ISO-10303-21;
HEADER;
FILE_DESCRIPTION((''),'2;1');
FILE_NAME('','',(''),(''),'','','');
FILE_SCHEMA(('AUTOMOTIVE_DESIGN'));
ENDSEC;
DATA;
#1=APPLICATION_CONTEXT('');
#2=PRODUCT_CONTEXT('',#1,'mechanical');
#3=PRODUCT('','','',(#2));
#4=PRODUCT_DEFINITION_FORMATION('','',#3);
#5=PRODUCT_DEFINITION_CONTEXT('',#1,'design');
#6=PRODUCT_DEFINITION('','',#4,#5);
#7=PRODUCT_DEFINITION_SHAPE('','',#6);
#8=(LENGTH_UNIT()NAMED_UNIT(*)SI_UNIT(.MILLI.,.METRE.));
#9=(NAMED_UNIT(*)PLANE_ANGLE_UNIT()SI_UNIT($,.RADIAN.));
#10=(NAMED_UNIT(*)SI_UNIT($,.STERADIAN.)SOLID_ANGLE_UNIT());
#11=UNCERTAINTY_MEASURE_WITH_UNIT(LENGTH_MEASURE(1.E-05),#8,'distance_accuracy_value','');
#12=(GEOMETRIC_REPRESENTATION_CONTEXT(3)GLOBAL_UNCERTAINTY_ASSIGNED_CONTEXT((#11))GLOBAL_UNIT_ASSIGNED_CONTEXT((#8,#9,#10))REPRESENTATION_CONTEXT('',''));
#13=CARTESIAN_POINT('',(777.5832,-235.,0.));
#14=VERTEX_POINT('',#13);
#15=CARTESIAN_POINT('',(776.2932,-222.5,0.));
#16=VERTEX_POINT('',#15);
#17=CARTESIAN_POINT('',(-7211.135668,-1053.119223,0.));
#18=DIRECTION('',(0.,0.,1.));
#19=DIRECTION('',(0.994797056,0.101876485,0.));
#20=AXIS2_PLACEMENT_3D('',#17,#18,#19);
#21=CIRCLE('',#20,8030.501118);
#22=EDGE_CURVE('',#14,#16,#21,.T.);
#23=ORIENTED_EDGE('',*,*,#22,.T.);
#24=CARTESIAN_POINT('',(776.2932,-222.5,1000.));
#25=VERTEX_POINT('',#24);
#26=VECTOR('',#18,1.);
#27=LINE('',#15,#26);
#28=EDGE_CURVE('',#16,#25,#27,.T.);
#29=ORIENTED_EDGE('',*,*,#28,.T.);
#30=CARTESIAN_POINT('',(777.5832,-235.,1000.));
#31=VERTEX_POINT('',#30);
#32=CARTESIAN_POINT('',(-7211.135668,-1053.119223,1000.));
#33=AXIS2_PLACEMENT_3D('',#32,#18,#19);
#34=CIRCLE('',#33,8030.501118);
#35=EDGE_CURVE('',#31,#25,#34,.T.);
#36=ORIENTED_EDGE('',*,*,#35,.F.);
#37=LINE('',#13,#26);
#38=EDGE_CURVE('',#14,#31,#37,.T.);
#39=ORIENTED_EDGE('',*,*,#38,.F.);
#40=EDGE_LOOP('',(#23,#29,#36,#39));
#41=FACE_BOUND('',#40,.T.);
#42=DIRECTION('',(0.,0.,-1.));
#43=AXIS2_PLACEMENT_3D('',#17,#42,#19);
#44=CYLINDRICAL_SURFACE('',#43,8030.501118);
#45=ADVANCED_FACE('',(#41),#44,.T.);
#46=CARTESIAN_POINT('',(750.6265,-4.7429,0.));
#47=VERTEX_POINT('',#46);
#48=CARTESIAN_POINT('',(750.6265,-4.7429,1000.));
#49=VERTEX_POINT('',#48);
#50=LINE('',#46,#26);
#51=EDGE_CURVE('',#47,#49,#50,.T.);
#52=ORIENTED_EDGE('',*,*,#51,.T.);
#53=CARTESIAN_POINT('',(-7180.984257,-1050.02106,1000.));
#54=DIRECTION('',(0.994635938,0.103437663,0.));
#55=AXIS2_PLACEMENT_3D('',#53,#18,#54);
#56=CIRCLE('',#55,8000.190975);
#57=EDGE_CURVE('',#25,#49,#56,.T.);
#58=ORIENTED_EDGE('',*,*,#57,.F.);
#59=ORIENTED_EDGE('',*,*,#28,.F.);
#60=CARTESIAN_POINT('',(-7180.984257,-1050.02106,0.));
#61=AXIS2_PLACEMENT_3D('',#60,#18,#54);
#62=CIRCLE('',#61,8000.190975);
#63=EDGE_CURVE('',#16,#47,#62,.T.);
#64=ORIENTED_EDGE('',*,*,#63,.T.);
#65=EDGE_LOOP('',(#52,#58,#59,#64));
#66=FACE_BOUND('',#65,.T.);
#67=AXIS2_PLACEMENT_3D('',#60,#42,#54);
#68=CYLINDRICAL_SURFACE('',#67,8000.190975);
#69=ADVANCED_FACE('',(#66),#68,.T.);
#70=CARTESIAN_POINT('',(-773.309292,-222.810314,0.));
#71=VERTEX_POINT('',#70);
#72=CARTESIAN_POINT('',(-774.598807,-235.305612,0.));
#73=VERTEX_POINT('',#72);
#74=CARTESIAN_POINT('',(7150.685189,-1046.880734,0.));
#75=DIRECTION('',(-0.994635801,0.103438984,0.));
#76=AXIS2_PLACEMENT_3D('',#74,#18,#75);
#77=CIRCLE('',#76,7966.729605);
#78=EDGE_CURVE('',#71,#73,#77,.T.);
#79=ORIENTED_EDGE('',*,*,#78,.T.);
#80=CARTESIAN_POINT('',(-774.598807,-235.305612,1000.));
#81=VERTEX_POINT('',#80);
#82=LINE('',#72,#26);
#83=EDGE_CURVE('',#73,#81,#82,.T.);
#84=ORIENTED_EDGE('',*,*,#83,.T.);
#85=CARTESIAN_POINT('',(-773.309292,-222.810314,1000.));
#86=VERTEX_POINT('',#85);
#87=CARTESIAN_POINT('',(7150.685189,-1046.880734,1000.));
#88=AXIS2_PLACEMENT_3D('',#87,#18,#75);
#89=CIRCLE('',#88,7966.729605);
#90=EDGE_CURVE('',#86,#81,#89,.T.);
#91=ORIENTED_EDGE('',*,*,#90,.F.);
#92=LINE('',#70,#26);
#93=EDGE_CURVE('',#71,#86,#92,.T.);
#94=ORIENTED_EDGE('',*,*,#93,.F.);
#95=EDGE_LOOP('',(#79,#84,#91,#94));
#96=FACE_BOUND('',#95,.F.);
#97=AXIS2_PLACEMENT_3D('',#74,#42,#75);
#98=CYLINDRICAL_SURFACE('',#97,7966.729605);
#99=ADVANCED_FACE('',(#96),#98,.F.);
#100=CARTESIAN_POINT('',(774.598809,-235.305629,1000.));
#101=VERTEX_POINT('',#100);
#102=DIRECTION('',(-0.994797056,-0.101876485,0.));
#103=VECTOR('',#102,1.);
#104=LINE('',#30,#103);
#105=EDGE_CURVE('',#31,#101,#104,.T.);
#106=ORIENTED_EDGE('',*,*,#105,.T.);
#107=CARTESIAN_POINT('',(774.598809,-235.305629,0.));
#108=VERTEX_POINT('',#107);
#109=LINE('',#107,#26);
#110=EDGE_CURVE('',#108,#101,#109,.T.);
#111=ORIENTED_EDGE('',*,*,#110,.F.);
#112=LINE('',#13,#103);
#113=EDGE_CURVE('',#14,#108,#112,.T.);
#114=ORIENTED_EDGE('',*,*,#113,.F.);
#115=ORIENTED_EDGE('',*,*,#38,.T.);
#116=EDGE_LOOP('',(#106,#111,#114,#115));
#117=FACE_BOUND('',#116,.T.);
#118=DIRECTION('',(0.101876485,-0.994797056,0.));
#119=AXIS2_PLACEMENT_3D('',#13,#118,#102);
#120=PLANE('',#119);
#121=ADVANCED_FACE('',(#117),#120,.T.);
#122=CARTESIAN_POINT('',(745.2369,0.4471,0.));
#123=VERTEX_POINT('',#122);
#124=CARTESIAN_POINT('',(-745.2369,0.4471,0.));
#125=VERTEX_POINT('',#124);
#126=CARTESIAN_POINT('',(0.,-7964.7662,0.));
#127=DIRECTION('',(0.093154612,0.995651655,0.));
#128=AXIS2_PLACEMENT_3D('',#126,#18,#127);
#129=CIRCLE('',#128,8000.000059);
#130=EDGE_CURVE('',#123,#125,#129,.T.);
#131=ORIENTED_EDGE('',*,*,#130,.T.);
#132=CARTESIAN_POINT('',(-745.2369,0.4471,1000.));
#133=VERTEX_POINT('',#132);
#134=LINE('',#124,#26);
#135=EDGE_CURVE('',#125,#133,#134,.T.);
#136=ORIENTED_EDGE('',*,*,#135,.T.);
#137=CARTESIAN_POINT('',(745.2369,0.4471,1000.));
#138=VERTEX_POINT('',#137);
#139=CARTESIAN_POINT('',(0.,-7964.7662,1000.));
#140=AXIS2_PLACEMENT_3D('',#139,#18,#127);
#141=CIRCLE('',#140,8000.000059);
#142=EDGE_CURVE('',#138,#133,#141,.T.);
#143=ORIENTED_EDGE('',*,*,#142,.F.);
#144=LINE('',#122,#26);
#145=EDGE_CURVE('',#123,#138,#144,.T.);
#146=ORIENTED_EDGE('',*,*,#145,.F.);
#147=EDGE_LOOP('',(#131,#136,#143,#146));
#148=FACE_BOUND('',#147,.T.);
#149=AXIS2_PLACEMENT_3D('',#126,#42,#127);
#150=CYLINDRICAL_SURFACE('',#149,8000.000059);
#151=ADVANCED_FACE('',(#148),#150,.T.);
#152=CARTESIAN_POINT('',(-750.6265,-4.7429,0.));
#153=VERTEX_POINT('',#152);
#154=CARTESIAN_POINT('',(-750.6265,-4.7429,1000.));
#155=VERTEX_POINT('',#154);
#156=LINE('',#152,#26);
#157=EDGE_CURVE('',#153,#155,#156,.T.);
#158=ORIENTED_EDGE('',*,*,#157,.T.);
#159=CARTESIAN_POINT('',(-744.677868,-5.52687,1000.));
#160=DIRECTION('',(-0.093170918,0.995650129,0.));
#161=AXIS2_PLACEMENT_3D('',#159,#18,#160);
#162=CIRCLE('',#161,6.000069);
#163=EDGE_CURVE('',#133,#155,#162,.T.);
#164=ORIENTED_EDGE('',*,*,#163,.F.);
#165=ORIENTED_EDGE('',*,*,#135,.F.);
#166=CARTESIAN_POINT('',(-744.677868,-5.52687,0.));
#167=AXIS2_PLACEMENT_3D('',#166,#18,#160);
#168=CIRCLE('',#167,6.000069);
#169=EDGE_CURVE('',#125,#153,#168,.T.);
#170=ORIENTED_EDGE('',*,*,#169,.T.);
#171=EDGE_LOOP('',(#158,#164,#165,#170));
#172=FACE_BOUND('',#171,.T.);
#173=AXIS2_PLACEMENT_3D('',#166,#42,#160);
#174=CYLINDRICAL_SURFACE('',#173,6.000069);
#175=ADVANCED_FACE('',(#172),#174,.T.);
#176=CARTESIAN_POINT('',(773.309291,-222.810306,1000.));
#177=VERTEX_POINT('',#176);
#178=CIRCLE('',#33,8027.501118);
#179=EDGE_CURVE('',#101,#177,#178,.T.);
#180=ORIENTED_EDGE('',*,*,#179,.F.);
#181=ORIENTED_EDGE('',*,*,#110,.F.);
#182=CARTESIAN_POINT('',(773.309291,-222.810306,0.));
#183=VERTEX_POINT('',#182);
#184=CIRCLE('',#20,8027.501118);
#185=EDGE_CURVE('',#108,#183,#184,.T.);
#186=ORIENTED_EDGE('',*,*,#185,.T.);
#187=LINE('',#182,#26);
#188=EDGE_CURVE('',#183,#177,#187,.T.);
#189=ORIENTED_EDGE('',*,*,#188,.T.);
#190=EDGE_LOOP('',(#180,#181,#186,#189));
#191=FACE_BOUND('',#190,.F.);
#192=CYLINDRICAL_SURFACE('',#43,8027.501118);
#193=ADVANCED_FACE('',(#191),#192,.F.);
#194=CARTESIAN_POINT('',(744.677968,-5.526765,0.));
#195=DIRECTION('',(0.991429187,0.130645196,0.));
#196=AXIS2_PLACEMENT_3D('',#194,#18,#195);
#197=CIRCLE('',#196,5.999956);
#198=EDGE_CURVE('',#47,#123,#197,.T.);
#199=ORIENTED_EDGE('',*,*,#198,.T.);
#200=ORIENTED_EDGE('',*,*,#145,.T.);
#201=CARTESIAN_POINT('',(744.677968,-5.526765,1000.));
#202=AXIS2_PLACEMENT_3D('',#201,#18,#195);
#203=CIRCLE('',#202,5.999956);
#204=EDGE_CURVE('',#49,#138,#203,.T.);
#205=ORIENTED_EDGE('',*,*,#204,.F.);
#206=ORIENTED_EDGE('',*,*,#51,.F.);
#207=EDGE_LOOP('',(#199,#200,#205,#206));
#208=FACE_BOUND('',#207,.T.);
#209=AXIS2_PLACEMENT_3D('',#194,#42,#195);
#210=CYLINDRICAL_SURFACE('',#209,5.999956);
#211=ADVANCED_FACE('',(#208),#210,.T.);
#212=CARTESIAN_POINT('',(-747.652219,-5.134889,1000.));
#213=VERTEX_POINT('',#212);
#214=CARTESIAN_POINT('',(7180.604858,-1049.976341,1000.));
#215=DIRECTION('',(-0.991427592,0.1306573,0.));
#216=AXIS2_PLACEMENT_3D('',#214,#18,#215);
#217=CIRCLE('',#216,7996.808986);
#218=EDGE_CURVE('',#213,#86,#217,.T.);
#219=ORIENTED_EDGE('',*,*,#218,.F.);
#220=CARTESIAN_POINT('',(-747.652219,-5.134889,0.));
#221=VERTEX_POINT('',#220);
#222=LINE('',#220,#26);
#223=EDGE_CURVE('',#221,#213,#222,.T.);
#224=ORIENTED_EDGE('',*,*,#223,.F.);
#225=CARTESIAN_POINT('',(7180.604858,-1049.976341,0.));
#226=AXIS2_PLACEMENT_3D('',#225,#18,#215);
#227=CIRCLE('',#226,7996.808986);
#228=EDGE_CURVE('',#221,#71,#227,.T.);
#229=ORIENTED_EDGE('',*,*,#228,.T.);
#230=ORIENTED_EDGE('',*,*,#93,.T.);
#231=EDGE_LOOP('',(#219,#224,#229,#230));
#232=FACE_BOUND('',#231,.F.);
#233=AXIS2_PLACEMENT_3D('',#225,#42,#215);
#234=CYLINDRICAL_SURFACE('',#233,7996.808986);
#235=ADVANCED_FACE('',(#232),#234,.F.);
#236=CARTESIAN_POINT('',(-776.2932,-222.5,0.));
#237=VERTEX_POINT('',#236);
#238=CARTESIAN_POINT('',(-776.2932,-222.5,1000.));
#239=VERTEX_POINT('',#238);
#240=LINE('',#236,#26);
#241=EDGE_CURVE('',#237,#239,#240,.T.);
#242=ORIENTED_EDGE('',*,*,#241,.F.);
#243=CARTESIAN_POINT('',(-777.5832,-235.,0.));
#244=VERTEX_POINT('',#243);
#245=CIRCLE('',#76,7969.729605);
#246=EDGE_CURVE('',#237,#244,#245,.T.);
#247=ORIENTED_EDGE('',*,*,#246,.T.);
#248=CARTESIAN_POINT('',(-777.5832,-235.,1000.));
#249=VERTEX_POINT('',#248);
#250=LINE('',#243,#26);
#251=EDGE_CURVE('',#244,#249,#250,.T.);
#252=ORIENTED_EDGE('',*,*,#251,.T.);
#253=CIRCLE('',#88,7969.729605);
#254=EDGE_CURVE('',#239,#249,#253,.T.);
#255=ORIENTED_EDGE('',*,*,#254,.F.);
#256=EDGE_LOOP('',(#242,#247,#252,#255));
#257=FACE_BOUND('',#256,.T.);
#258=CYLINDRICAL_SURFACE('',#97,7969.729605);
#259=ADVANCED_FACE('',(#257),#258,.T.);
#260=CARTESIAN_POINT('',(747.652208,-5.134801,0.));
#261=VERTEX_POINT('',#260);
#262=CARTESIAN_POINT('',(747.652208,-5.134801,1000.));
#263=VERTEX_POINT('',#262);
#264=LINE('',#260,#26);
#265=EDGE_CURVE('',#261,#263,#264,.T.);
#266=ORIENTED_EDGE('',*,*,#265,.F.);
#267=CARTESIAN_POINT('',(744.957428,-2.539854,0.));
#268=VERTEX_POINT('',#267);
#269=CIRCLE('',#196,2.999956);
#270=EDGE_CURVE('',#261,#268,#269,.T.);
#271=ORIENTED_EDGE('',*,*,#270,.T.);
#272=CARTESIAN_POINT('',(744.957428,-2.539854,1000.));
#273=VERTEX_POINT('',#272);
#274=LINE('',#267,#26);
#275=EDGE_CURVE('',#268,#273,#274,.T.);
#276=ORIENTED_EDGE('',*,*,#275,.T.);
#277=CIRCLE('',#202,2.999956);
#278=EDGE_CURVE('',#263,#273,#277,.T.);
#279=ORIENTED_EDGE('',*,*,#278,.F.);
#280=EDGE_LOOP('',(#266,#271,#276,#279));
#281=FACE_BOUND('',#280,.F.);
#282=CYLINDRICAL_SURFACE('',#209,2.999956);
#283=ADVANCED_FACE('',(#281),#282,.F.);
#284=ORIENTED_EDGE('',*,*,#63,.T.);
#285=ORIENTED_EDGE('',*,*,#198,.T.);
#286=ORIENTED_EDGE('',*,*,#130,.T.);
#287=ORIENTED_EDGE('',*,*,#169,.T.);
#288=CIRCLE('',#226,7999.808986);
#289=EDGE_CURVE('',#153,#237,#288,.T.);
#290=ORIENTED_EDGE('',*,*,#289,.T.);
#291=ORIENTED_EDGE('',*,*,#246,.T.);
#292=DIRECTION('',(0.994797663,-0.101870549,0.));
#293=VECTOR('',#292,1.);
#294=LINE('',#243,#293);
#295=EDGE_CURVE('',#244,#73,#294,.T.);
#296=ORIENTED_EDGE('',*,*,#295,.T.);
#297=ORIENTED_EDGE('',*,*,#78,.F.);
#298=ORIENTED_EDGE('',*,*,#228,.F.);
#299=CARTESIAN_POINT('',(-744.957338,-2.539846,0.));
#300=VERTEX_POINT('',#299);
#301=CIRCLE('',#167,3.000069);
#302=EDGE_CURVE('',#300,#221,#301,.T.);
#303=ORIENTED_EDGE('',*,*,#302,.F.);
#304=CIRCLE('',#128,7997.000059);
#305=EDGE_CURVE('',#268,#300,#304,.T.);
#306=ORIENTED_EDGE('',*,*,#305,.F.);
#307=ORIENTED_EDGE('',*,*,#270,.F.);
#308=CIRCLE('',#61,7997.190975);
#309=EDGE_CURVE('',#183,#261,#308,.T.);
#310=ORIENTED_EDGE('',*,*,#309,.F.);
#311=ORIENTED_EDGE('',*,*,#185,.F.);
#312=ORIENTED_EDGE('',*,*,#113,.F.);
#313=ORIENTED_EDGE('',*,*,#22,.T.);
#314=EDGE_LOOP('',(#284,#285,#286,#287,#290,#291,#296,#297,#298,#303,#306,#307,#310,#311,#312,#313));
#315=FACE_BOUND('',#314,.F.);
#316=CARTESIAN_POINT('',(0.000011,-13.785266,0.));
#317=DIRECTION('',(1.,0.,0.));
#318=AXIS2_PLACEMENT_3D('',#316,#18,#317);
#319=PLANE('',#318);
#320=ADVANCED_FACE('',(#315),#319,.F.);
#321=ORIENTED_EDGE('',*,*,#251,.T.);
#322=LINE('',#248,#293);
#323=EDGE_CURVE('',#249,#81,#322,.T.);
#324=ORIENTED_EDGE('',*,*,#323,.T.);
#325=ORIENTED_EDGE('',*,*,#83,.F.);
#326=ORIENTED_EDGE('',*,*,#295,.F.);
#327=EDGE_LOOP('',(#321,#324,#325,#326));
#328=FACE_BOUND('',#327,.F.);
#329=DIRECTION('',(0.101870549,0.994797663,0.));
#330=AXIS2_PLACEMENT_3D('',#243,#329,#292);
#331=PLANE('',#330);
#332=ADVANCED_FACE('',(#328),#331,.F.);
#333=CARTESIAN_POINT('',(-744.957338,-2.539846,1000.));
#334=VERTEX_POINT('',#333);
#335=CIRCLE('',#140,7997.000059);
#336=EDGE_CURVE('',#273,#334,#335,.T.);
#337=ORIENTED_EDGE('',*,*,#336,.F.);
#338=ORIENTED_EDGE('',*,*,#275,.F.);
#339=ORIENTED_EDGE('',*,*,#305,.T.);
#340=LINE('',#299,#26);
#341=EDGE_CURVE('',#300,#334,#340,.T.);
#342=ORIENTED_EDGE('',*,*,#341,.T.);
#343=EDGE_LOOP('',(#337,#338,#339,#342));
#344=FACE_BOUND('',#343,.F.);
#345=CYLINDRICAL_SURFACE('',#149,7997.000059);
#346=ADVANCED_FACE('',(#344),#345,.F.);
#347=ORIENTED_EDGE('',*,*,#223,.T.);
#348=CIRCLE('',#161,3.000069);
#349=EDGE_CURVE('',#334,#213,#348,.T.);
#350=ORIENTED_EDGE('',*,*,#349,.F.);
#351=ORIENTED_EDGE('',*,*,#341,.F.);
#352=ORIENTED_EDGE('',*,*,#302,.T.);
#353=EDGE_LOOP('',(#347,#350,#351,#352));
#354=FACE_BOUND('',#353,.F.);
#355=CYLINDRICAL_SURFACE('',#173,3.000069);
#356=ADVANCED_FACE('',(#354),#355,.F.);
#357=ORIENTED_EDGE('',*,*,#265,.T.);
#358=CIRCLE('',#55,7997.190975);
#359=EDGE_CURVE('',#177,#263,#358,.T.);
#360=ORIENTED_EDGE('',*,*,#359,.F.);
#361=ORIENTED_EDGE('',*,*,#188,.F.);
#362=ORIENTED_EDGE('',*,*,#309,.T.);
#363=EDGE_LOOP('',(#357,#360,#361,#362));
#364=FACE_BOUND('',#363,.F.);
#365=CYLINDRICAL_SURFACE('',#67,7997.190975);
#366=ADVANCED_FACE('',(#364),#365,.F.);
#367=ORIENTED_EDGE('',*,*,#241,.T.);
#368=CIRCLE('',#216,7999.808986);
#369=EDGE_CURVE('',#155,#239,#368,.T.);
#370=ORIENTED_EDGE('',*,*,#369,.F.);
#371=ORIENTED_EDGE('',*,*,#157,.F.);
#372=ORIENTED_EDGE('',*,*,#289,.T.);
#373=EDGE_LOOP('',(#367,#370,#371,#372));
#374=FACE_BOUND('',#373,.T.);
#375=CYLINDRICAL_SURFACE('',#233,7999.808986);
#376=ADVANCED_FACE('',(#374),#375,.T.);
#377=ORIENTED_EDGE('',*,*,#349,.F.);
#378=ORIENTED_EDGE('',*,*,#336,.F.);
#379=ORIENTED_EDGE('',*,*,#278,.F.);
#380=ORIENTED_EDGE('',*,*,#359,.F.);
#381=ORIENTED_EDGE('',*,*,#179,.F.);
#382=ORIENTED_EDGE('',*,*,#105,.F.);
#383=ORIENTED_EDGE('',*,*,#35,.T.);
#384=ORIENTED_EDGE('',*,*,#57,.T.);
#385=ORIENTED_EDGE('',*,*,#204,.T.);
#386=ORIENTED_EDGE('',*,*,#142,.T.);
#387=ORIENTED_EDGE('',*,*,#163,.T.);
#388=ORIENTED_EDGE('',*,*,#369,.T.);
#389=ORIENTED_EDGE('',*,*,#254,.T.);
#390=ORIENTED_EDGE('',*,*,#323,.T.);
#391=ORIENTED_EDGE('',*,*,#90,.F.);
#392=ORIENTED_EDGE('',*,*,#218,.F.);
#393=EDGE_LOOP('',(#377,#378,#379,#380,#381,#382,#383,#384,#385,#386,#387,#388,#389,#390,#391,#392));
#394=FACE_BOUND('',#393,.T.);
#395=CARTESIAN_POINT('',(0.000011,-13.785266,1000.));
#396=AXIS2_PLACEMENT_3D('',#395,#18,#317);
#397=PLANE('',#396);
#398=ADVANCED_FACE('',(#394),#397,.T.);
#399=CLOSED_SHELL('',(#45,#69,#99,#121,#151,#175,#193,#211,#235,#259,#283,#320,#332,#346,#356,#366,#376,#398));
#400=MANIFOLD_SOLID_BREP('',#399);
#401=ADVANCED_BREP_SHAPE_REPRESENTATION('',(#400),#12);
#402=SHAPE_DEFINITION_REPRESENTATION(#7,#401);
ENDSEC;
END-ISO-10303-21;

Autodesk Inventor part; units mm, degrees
ref_plane "YZ Plane" through (0, 0, 0) normal (1, 0, 0) x (0, 1, 0)
ref_plane "XZ Plane" through (0, 0, 0) normal (0, 1, 0) x (-1, 0, 0)
ref_plane "XY Plane" through (0, 0, 0) normal (0, 0, 1) x (1, 0, 0)
sketch "Sketch1" plane through (0, 0, 0) normal (0, 0, 1) x (1, 0, 0)
  line L0 (-750, 0) -> (750, 0) construction
  line L1 (750, 0) -> (750, -2100) construction
  line L2 (750, -2100) -> (110, -2700) construction
  line L3 (108.9077, -2700) -> (-108.9077, -2700) construction
  line L4 (-110, -2700) -> (-750, -2100) construction
  line L5 (-750, -2100) -> (-750, 0) construction
  arc A0 (745.2369, 0.4471) -> (-745.2369, 0.4471) centre (0, -7964.7662) ccw
  arc A1 (-750.6265, -4.7429) -> (-776.2932, -222.5) centre (7180.7944, -1050) ccw
  arc A2 (-777.5832, -235) -> (-778.8534, -247.5) centre (7180.7944, -1050) ccw construction
  arc A3 (750.1285, -2099.0286) -> (778.8534, -247.5) centre (-7180.7944, -1050) ccw construction
  arc A4 (777.5832, -235) -> (776.2932, -222.5) centre (-7180.7944, -1050) ccw
  line L6 (-777.5832, -235) -> (777.5832, -235) construction
  arc A5 (-749.3229, -2100.7083) -> (-677.5699, -2174.8011) centre (5033.2984, 3427.5183) ccw construction
  line L7 (-750, -2100) -> (750, -2100) construction
  line L8 (-547.1729, -2035.7109) -> (-801.0834, -2306.5488) construction
  arc A6 (-677.5699, -2174.8011) -> (-110.8367, -2699.2976) centre (5033.2984, 3427.5183) ccw construction
  arc A7 (-745.2369, 0.4471) -> (-750.6265, -4.7429) centre (-744.6779, -5.5268) ccw
  arc A8 (750.6265, -4.7429) -> (745.2369, 0.4471) centre (744.6779, -5.5268) ccw
  arc A9 (-750.1285, -2099.0286) -> (-749.3229, -2100.7083) centre (-747.1545, -2098.6352) ccw construction
  arc A10 (110.8367, -2699.2976) -> (677.5699, -2174.8011) centre (-5033.2984, 3427.5183) ccw construction
  line L9 (553.8195, -2042.8006) -> (794.4368, -2299.4591) construction
  arc A11 (677.5699, -2174.8011) -> (749.3229, -2100.7083) centre (-5033.2984, 3427.5183) ccw construction
  arc A12 (749.3229, -2100.7083) -> (750.1285, -2099.0286) centre (747.1545, -2098.6352) ccw construction
  arc A13 (-110.8367, -2699.2976) -> (-108.9077, -2700) centre (-108.9077, -2697) ccw construction
  arc A14 (108.9077, -2700) -> (110.8367, -2699.2976) centre (108.9077, -2697) ccw construction
  line L10 (-778.8534, -247.5) -> (778.8534, -247.5) construction
  line L11 (-776.2932, -222.5) -> (776.2932, -222.5) construction
  arc A15 (-776.2932, -222.5) -> (-777.5832, -235) centre (7180.7944, -1050) ccw
  arc A16 (-778.8534, -247.5) -> (-750.1285, -2099.0286) centre (7180.7944, -1050) ccw construction
  arc A17 (778.8534, -247.5) -> (777.5832, -235) centre (-7180.7944, -1050) ccw construction
  arc A18 (776.2932, -222.5) -> (750.6265, -4.7429) centre (-7180.7944, -1050) ccw
  point P0 (0, 0)
  point P1 (0, 0)
  point P2 (0, -2700)
  point P3 (-674.1281, -2171.1299)
  point P4 (674.1281, -2171.1299)
  dimension "d17" = 1500
  dimension "d18" = 2100
  dimension "d19" = 220
  dimension "d20" = 2700
  dimension "d21" = 8000
  dimension "d31" = 8000
  dimension "d33" = 8000
  dimension "d34" = 235
  dimension "d35" = 8000
  dimension "d36" = 104
  dimension "d37" = 6
  dimension "d40" = 3
  dimension "d41" = 8000
  dimension "d42" = 104
  dimension "d44" = 3
  dimension "d46" = 12.5
  dimension "d47" = 12.5
contour flange "Contour Flange1" sketch "Sketch1" thickness 3 bend radius 3 width 1000 along (0, 0, 1) mid plane no both sides no wall seen from (776.9407, -228.7497, 0) lies toward (-0.9947169, -0.1026563, 0) curves A4 A18 A8 A0 A7 A1 A15
bend "Bend1"
corner "Corner1"
equation "\"d17\" = Бак_ширина_общая"
equation "\"d18\" = Бак_высота_до_конуса"
equation "\"d19\" = Бак_брюхо_ширина_полки"
equation "\"d20\" = Бак_высота_общая"
equation "\"d21\" = Бак_радиус_стенок_общий"
equation "\"d31\" = Бак_радиус_стенок_общий"
equation "\"d33\" = Бак_радиус_стенок_общий"
equation "\"d34\" = Бак_спина_длина_фланцев"
equation "\"d35\" = Бак_радиус_стенок_общий"
equation "\"d36\" = Бак_борт_длина_фланца"
equation "\"d37\" = Thickness + BendRadius"
equation "\"d40\" = Thickness"
equation "\"d41\" = Бак_радиус_стенок_общий"
equation "\"d42\" = d36"
equation "\"d46\" = Бак_нахлест_фланца"
equation "\"d47\" = Бак_нахлест_фланца"
equation "\"d3\" = Thickness"
equation "\"d4\" = BendReliefWidth"
equation "\"d5\" = BendReliefDepth"
equation "\"d6\" = MinimumRemnant"
equation "\"d7\" = TransitionRadius"
equation "\"d9\" = BendRadius"
equation "\"d11\" = CornerReliefSize"
equation "\"d12\" = GapSize"
equation "\"d13\" = JacobiRadiusSize"
equation "\"BendRadius\" = Thickness"
equation "\"BendReliefWidth\" = Thickness"
equation "\"BendReliefDepth\" = 0.5 * Thickness"
equation "\"CornerReliefSize\" = 4 * Thickness"
equation "\"MinimumRemnant\" = 2 * Thickness"
equation "\"TransitionRadius\" = BendRadius"
equation "\"JacobiRadiusSize\" = BendRadius"
equation "\"GapSize\" = Thickness"
equation "\"Бак_ширина_общая\" = 1500"
equation "\"Бак_высота_до_конуса\" = 2100"
equation "\"Бак_брюхо_ширина_полки\" = 220"
equation "\"Бак_радиус_стенок_общий\" = 8000"
equation "\"Бак_спина_длина_фланцев\" = 235"
equation "\"Thickness\" = 3"
equation "\"Бак_нахлест_фланца\" = 12.5"
equation "\"Бак_высота_общая\" = 2700"
equation "\"Бак_борт_длина_фланца\" = 104"
properties part number "МОО 010 лист спина 1" material "Stainless Steel AISI 304"
